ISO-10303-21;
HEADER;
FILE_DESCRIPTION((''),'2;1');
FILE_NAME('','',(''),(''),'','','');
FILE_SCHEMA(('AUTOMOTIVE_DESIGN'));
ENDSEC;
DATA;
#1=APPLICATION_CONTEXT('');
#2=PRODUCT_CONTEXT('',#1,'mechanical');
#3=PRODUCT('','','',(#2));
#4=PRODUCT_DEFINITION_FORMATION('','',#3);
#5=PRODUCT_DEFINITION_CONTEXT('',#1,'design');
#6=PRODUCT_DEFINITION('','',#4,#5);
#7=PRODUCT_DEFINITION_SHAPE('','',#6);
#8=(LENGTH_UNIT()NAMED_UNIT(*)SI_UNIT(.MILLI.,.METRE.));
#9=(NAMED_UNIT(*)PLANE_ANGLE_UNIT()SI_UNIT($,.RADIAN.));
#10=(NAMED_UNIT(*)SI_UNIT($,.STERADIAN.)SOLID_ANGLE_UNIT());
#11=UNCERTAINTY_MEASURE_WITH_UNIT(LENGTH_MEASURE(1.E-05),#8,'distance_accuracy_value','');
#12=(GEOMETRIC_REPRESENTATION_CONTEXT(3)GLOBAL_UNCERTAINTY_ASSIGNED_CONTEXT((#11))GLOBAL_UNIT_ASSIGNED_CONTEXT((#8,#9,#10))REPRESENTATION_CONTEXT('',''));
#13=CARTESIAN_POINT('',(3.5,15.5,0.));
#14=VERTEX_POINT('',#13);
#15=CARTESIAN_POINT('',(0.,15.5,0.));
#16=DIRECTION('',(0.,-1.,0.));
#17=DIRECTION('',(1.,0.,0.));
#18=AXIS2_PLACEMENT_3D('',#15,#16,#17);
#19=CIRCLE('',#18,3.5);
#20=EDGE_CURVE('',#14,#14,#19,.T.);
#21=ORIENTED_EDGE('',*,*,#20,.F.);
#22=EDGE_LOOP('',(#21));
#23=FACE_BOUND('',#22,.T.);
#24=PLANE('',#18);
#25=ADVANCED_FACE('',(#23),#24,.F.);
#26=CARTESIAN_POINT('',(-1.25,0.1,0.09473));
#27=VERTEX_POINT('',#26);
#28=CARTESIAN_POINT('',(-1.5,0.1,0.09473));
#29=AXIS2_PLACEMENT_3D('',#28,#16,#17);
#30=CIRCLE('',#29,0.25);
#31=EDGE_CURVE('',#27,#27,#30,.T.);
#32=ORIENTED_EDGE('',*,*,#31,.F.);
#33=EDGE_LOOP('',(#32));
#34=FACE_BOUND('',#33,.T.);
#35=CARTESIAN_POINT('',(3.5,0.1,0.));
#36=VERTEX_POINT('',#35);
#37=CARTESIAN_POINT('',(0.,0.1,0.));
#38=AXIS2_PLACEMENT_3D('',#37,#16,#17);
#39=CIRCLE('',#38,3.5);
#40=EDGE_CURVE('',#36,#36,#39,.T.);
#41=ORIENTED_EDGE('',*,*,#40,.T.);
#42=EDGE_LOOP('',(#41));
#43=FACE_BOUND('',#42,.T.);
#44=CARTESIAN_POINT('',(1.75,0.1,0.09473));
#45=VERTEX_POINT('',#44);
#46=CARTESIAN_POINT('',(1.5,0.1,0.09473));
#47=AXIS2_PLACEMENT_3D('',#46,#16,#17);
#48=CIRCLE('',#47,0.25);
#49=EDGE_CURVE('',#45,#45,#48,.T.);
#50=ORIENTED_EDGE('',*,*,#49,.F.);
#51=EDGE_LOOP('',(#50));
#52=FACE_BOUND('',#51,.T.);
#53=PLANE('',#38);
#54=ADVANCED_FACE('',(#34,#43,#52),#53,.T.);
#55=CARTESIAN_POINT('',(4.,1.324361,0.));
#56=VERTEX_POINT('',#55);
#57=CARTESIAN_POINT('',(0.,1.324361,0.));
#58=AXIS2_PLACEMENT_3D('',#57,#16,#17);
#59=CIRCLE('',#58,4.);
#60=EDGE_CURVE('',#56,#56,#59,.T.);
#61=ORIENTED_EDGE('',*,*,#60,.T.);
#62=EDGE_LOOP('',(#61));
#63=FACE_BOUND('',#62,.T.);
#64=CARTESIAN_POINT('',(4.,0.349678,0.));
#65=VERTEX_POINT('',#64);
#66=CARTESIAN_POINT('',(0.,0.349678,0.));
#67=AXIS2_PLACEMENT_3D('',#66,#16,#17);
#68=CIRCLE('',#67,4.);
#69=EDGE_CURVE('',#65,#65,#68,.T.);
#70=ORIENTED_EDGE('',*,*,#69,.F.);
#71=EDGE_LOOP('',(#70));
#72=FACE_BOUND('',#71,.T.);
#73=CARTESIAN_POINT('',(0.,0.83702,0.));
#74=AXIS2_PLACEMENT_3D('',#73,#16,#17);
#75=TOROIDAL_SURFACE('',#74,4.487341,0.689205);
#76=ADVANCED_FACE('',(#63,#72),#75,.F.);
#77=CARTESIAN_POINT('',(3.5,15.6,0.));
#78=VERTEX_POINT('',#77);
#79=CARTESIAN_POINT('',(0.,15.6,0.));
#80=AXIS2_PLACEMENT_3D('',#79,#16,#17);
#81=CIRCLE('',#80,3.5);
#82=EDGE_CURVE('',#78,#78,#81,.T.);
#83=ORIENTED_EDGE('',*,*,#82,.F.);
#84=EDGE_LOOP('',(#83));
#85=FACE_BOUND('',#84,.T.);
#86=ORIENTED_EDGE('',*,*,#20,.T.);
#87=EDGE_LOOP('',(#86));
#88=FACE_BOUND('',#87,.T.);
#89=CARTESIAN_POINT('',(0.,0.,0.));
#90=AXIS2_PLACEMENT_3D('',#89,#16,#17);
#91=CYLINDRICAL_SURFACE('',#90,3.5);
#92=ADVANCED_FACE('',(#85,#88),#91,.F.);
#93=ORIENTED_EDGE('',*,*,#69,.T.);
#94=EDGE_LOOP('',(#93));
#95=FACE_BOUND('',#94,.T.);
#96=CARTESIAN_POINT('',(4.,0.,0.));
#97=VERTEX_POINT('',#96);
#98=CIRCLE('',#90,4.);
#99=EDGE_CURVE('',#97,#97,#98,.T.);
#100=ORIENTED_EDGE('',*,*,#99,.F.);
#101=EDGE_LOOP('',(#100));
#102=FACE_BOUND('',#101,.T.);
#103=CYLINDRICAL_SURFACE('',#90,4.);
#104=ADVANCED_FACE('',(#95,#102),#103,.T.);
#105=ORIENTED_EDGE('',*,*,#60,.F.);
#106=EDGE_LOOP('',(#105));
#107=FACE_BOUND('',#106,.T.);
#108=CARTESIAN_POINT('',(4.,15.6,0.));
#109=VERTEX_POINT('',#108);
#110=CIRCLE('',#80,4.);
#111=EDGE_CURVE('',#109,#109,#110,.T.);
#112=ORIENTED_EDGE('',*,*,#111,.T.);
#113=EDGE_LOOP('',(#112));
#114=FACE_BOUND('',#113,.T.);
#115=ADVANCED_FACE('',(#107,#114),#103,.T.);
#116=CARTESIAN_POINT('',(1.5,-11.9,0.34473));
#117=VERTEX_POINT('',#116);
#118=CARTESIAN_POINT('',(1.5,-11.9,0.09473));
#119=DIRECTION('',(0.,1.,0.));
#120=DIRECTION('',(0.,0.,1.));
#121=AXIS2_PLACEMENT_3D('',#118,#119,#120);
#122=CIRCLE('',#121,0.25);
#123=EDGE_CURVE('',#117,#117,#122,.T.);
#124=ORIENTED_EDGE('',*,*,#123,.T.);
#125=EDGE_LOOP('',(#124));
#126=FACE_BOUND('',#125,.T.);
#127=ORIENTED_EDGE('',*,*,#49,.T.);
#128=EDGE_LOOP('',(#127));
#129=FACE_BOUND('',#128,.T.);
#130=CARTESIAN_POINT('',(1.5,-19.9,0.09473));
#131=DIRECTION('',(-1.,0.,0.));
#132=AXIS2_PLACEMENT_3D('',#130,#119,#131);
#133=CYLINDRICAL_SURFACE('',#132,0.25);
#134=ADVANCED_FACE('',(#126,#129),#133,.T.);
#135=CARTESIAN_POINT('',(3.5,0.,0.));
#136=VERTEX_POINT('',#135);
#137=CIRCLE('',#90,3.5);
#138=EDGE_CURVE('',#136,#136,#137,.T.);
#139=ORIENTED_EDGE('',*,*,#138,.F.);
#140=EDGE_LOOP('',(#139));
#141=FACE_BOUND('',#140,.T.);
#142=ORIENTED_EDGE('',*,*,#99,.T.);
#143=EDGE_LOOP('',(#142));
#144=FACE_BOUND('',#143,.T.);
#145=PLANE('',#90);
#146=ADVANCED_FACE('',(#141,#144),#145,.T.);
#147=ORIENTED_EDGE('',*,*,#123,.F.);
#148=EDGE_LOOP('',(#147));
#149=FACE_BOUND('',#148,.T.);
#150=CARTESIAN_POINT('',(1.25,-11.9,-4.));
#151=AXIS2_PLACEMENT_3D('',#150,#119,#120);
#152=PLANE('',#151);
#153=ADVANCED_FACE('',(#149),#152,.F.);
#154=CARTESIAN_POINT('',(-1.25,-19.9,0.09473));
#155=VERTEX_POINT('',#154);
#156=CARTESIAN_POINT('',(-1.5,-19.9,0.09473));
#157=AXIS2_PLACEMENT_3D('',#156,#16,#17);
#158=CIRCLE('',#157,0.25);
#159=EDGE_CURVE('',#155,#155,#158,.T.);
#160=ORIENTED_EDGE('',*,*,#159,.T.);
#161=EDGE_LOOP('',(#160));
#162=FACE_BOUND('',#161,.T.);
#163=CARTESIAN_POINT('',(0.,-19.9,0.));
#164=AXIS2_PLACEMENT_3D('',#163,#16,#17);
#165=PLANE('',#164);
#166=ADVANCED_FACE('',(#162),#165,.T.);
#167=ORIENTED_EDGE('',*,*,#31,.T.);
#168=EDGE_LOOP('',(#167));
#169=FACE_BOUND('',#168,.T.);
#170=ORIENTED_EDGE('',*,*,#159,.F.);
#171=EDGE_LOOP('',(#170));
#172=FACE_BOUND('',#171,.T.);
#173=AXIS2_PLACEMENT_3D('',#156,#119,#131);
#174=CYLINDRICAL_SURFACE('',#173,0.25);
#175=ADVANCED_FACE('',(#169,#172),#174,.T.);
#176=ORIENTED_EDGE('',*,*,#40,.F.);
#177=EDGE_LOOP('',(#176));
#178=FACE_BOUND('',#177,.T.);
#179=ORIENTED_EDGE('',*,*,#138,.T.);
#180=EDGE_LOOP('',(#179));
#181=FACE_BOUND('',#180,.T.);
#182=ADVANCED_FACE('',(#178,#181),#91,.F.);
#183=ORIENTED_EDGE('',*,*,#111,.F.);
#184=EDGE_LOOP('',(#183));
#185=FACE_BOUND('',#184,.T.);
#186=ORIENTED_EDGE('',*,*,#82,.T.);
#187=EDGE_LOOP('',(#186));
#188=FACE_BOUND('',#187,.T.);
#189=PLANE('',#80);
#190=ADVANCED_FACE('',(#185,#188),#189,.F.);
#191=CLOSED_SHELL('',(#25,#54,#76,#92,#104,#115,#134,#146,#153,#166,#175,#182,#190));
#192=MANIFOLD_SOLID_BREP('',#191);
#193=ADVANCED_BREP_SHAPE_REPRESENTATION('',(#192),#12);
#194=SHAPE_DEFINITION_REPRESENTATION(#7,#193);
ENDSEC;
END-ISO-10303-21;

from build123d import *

# Parameters (mm, degrees)
SKETCH_2_R        = 0.25
EXTRUDE_1_DEPTH   = 20
OTHER_START       = -19.9
OTHER_1_OUTLINE_R = 0.25
OTHER_1_DEPTH     = 8


# Read off the part's stored shape, not the designer's step: 连接点1
with BuildPart() as part:
    # 草图1 → 旋转1 (revolve)
    with BuildSketch(Plane.XY):
        with BuildLine():
            Line((3.5, 0.1), (3.5, 0))
            Line((3.5, 0), (4, 0))
            Line((4, 0), (4, 0.349678286))
            ThreePointArc((4, 0.349678286), (3.798136614, 0.837019609), (4, 1.324360933))
            Line((4, 1.324360933), (4, 15.6))
            Line((4, 15.6), (3.5, 15.6))
            Line((3.5, 15.6), (3.5, 15.5))
            Line((3.5, 15.5), (0, 15.5))
            Line((0, 15.5), (0, 0.1))
            Line((0, 0.1), (3.5, 0.1))
        make_face()
    revolve(axis=Axis((0, 0, 0), (0, 1, 0)))

    # 草图2 → 凸台-拉伸1 (add)
    with BuildSketch(Plane.XZ.offset(-0.1)):
        with Locations((-1.5, 0.094730426)):
            Circle(SKETCH_2_R)
        with Locations((1.5, 0.094730426)):
            Circle(SKETCH_2_R)
    extrude(amount=EXTRUDE_1_DEPTH)

    # 连接点1 outline → 连接点1 (cut)
    with BuildSketch(Plane(origin=(0, 0, 0), x_dir=(1, 0, 0), z_dir=(0, 1, 0)).offset(OTHER_START)):
        with Locations((1.5, -0.094730426)):
            Circle(OTHER_1_OUTLINE_R)
    extrude(amount=OTHER_1_DEPTH, mode=Mode.SUBTRACT)


solid = part.part
